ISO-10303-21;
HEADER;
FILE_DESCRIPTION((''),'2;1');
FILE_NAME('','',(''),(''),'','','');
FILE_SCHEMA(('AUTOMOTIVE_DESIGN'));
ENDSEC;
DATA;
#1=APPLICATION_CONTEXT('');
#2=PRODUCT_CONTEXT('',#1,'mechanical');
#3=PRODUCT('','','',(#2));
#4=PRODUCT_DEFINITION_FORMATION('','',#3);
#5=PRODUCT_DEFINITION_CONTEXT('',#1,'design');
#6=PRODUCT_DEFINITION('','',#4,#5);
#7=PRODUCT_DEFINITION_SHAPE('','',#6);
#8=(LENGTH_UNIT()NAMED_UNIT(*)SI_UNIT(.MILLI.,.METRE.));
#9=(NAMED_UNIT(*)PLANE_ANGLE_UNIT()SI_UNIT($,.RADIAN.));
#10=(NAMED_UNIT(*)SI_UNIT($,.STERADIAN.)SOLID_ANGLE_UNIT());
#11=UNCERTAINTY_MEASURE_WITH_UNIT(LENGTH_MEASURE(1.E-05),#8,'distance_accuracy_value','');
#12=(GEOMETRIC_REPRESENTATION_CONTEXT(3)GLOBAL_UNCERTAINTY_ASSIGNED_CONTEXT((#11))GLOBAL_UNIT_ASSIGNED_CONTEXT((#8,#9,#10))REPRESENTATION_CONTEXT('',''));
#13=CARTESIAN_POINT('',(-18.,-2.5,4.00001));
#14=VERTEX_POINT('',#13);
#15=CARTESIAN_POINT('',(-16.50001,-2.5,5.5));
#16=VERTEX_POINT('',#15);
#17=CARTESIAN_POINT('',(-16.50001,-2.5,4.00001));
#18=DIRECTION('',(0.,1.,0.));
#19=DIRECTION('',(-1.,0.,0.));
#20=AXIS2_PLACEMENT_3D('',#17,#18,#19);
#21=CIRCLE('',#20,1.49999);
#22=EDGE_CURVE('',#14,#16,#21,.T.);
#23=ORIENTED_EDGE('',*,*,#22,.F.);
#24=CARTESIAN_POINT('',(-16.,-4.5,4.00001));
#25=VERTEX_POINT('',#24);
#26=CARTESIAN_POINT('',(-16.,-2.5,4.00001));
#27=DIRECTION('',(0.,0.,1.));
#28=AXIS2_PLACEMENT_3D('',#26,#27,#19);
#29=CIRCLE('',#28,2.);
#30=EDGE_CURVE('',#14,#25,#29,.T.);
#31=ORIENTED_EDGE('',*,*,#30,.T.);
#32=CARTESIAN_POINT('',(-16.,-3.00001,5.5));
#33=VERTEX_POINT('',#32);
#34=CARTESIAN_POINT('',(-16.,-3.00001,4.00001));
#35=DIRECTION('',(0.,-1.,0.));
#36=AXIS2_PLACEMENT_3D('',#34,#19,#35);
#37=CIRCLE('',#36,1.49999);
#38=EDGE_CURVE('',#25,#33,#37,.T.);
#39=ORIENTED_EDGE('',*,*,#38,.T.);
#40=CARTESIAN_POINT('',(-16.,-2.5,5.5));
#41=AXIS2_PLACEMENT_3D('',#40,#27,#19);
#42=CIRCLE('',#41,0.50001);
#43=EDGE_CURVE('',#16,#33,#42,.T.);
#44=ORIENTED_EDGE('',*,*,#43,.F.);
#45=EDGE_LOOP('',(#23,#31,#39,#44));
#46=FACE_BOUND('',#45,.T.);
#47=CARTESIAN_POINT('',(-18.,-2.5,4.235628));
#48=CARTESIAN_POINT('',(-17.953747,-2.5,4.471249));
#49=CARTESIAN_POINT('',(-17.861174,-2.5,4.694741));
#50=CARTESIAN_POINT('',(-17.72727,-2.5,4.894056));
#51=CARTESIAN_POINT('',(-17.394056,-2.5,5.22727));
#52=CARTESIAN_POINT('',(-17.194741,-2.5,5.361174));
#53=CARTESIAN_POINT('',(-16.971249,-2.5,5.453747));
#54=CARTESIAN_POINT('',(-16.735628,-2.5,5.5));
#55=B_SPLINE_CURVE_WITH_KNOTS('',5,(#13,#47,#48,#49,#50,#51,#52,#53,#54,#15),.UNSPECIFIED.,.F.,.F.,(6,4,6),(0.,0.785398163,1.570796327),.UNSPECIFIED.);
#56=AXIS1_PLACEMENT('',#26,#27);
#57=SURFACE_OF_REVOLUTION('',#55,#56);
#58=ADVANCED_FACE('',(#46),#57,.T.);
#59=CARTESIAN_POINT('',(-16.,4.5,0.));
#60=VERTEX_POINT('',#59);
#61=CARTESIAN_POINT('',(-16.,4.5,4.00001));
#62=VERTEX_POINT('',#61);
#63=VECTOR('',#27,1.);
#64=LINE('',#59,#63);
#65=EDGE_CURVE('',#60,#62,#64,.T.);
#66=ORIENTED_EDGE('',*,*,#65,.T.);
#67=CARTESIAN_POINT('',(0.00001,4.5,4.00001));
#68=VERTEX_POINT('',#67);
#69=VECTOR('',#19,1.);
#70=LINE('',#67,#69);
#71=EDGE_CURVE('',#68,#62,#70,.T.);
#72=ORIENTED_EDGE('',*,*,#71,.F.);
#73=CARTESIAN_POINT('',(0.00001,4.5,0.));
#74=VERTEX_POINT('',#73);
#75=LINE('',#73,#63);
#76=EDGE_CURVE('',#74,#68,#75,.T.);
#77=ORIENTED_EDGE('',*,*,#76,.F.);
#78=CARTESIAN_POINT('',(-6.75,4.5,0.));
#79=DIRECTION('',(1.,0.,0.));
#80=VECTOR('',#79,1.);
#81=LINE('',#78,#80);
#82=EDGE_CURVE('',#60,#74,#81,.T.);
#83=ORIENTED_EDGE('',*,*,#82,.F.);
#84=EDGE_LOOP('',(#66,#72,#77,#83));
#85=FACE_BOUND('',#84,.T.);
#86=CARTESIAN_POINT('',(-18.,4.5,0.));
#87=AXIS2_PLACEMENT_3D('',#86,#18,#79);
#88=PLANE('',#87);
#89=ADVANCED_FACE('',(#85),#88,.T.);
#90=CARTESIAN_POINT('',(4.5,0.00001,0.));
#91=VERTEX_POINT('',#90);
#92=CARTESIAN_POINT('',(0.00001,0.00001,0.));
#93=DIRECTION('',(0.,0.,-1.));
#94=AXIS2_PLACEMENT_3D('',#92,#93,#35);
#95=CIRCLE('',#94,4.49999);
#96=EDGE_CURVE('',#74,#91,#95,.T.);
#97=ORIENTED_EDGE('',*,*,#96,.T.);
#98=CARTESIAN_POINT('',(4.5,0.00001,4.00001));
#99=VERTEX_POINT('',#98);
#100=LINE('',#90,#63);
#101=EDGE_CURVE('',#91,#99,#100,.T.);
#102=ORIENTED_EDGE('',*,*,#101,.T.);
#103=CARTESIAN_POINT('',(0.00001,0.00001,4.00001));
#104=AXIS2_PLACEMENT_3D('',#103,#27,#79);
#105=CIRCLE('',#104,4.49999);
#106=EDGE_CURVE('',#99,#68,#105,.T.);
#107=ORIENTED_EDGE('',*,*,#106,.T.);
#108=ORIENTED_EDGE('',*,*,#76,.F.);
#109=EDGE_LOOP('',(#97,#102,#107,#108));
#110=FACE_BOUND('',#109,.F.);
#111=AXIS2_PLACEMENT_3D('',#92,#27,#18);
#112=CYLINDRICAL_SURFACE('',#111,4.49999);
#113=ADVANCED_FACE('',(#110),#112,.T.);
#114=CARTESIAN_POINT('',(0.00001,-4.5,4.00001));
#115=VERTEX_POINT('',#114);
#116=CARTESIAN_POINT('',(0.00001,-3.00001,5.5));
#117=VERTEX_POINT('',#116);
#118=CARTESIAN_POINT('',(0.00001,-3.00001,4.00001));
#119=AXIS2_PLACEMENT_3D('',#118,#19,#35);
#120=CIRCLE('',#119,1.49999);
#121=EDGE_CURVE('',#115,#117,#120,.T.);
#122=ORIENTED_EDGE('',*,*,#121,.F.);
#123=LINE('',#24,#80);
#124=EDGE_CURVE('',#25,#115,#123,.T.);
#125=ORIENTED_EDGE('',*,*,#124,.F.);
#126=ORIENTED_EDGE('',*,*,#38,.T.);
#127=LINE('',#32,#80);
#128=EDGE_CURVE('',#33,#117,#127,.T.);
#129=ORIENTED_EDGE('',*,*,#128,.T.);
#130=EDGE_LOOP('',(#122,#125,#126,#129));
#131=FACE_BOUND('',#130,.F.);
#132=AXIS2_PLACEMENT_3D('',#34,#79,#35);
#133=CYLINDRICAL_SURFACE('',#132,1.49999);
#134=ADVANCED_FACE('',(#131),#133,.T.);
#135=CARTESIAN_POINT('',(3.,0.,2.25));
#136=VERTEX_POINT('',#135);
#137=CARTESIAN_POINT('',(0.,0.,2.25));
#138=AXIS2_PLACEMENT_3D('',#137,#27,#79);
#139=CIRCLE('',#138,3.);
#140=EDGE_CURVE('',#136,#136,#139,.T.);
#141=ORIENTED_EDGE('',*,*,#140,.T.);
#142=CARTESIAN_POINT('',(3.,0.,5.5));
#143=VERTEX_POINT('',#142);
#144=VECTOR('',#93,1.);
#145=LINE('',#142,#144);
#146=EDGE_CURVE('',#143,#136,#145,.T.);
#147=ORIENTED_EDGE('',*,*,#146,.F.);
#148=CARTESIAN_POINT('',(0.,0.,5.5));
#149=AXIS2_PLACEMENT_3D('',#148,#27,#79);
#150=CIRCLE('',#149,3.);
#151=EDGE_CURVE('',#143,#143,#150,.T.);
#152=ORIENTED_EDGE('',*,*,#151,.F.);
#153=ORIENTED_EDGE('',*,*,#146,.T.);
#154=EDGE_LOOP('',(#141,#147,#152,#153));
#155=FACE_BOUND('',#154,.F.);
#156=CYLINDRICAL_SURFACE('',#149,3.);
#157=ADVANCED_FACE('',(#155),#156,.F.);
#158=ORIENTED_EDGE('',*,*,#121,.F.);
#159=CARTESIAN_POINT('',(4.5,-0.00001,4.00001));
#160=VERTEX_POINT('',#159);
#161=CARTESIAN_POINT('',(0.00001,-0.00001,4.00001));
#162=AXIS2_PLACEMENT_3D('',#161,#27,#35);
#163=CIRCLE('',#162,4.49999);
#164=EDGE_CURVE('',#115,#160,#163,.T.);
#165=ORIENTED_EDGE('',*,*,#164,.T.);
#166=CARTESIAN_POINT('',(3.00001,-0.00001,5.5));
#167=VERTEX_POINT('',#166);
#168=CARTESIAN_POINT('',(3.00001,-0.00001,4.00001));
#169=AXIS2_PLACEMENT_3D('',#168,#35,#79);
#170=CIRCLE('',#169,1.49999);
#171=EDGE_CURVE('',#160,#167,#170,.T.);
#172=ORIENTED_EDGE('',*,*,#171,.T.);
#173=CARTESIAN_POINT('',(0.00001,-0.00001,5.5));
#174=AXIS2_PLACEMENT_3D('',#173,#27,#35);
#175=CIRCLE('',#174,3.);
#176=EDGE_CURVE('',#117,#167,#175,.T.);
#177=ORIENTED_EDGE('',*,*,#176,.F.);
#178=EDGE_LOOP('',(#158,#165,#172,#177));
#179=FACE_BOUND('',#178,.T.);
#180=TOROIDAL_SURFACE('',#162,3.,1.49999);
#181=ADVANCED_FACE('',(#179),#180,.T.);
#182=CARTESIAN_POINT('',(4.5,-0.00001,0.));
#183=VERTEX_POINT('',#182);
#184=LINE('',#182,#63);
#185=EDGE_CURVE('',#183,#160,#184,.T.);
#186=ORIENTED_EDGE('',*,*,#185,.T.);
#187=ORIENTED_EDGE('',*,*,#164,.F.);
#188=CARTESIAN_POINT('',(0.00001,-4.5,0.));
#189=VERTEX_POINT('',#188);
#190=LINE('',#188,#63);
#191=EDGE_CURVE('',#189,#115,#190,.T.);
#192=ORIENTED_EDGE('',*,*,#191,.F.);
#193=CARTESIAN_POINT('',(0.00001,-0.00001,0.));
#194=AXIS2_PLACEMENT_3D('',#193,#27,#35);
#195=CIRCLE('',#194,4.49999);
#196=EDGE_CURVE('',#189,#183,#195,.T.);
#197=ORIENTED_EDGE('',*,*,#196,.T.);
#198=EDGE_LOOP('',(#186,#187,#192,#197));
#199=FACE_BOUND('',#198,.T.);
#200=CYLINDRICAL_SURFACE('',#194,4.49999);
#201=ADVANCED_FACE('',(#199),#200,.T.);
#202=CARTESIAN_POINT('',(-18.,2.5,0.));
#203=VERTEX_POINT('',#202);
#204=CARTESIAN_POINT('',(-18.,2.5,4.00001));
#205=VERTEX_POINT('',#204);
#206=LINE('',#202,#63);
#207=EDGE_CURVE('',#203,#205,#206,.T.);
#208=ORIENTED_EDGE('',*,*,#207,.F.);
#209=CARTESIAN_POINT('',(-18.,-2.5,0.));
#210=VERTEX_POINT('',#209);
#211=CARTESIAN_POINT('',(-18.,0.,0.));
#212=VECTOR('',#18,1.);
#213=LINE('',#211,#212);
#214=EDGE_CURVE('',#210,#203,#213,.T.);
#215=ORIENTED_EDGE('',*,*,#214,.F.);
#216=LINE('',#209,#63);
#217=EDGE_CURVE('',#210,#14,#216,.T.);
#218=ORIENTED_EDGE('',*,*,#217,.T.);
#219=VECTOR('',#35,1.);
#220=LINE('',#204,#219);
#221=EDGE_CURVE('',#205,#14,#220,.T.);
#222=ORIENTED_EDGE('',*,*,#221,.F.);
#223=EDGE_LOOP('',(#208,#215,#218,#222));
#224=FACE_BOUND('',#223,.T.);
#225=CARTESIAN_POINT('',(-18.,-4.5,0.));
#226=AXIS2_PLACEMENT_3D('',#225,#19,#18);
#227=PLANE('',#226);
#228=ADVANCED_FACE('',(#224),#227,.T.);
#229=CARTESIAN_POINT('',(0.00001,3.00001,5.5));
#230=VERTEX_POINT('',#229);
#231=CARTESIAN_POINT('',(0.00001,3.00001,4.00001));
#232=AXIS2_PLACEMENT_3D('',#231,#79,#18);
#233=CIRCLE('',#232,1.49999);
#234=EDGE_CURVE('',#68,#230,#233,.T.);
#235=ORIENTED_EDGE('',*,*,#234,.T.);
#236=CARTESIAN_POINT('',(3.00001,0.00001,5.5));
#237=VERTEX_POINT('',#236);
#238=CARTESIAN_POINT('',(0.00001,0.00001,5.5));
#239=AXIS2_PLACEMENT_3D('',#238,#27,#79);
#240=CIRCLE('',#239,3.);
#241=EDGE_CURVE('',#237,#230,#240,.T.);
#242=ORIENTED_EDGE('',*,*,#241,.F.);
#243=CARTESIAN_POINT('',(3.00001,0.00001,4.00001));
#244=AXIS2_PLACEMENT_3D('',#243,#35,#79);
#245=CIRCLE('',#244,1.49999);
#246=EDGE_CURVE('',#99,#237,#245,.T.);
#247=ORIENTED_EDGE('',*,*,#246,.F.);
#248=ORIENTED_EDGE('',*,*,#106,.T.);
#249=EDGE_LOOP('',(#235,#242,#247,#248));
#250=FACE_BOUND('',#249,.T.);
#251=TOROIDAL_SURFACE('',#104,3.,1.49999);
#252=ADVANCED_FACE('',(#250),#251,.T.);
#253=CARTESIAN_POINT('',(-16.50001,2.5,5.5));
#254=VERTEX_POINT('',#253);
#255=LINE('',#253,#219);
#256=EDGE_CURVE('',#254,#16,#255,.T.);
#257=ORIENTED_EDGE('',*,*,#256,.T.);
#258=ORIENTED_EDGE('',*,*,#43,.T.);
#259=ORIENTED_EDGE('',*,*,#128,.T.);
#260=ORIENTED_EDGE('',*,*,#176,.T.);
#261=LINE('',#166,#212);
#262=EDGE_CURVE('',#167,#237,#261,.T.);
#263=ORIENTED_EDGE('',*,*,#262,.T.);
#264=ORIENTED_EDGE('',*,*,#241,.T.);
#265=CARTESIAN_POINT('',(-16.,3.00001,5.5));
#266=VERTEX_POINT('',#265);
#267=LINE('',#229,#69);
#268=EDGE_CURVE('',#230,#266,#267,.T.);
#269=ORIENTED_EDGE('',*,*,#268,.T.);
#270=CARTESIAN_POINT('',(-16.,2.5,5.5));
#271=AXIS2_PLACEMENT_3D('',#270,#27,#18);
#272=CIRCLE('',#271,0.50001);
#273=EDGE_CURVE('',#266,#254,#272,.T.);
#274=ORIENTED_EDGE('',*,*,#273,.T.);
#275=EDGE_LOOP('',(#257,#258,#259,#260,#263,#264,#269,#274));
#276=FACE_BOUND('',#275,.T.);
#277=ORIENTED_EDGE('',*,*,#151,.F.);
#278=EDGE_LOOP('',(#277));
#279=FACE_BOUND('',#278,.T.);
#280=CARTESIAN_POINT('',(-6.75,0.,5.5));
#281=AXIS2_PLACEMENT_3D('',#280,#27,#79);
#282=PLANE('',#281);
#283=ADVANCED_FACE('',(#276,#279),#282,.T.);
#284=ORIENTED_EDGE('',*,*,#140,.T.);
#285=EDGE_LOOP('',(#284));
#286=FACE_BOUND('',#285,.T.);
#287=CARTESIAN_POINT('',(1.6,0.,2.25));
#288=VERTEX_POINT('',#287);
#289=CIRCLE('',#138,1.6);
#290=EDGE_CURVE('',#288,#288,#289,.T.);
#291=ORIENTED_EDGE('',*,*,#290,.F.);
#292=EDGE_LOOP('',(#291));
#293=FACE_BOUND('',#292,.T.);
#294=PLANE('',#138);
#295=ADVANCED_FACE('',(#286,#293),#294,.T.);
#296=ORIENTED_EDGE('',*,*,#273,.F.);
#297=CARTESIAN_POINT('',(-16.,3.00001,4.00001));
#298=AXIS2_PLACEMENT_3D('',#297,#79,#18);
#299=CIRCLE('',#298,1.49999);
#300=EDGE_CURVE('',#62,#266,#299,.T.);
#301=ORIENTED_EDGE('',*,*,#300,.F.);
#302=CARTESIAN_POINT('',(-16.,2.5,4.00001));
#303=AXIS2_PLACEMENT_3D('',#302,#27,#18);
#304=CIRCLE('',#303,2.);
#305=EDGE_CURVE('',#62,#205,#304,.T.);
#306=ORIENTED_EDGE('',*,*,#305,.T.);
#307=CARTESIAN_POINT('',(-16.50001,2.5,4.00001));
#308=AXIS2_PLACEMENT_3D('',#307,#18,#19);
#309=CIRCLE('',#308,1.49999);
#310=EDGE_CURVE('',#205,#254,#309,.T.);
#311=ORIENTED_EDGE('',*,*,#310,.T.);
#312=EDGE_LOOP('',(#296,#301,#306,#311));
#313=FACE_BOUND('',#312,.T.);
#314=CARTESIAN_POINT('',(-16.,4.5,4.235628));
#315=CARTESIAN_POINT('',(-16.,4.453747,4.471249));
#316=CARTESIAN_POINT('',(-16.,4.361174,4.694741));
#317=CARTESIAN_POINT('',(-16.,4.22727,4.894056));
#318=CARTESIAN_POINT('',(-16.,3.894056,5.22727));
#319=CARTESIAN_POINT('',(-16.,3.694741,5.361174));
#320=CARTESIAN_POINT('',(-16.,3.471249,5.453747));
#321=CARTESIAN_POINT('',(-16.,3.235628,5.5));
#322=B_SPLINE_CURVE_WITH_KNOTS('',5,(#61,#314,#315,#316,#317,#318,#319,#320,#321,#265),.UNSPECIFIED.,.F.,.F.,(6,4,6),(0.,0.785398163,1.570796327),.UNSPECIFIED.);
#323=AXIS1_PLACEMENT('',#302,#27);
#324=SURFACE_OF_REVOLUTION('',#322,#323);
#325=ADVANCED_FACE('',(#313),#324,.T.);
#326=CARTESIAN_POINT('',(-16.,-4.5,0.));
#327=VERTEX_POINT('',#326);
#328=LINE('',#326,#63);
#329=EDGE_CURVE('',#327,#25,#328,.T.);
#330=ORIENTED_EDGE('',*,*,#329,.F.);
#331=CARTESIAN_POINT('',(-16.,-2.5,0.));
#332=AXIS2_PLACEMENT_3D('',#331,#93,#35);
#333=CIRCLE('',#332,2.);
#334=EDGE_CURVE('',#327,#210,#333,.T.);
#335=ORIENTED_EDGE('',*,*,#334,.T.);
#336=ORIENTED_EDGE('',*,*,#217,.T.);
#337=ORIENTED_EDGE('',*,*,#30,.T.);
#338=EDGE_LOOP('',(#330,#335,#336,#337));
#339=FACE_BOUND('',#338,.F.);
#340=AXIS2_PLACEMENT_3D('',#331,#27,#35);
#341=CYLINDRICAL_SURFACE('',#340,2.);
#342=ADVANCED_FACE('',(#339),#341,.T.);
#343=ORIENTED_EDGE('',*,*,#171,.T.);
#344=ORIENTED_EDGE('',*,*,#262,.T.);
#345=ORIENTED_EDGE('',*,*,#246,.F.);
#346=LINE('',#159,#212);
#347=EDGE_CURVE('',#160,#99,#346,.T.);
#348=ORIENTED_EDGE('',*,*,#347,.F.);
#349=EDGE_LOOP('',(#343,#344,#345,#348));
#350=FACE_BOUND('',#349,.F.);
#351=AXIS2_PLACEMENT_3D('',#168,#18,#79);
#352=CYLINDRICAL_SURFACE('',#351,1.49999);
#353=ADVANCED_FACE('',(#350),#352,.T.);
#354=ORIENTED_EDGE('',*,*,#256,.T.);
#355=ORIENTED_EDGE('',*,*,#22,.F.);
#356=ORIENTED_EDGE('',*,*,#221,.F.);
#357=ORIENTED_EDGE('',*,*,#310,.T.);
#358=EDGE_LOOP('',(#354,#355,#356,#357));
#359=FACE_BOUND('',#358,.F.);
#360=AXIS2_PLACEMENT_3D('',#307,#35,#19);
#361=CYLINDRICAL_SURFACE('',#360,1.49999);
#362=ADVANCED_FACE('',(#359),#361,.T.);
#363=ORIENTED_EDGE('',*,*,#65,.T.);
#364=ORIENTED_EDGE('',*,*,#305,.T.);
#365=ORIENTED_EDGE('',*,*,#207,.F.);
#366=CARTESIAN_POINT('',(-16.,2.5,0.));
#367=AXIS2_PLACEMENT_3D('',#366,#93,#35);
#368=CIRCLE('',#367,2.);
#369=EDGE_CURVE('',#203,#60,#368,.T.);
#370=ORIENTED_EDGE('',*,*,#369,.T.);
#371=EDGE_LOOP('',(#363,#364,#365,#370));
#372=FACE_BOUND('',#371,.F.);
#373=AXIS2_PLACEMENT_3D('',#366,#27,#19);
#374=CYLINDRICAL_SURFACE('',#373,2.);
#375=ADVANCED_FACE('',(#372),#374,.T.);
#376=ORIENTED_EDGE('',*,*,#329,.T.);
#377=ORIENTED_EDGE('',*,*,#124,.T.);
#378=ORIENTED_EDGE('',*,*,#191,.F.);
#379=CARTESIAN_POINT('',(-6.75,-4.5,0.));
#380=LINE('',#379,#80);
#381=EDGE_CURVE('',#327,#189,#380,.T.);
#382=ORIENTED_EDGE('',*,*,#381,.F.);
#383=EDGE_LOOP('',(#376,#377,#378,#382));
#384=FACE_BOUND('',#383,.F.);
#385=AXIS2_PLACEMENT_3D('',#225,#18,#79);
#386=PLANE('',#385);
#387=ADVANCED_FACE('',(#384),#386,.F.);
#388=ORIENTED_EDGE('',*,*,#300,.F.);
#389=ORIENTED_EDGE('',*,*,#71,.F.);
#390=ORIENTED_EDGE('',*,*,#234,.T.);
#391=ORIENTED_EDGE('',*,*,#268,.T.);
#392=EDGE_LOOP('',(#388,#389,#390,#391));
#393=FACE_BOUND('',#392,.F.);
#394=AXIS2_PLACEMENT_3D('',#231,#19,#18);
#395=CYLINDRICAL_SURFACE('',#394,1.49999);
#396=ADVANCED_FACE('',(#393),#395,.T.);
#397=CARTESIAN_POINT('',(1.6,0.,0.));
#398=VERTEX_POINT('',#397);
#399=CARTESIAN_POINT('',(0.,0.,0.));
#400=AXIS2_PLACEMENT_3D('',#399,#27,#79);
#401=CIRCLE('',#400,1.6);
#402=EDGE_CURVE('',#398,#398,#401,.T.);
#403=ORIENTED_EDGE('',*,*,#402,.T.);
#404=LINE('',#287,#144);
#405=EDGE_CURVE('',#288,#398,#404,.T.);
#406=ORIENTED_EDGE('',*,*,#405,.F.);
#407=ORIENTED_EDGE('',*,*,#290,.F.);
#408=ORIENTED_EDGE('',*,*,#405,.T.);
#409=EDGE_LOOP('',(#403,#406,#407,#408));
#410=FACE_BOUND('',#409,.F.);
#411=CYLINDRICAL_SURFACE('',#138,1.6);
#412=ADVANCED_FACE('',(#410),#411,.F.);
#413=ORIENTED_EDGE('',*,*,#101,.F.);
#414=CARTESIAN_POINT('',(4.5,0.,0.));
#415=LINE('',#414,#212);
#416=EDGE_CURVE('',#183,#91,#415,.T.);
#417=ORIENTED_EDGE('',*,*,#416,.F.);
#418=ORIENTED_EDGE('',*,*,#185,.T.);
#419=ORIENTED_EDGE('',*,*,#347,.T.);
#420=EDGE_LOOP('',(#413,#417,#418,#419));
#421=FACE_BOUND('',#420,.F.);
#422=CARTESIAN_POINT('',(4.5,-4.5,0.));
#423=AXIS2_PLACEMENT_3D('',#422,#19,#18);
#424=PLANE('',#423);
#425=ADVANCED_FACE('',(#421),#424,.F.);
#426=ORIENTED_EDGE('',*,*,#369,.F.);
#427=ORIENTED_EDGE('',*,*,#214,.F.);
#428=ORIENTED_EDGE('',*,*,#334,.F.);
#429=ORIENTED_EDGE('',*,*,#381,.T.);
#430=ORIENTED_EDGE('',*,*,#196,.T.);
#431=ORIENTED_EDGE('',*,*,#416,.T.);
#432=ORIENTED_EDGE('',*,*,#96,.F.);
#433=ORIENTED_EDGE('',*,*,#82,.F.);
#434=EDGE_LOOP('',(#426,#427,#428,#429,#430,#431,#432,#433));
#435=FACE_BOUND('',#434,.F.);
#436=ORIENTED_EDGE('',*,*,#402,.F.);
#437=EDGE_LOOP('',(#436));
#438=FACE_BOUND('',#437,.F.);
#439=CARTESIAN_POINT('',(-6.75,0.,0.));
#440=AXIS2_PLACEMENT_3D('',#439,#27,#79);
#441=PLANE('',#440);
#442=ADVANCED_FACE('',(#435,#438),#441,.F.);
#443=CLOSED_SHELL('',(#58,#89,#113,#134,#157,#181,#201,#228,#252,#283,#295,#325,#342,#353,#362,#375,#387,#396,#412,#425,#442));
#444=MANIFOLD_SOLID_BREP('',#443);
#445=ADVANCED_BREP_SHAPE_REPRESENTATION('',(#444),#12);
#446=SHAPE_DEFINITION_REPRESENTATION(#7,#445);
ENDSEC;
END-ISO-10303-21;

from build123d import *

# Parameters (mm, degrees)
F0_W     = 22.5
F0_H     = 9
F1_DEPTH = 5.5
F2_R     = 3
F3_DEPTH = 3.25
F4_R     = 1.6
F5_DEPTH = 2.5
F6_R     = 4.49999
F7_R     = 2
F8_R     = 1.49999


# Not quite as in the source:
# - a fillet or chamfer is up to 0.001 mm smaller than in the source, because OpenCascade refuses the exact size


with BuildPart() as f1:
    # F0 (on Top) → F1 (new body)
    with BuildSketch(Plane.XY):
        with Locations((-6.75, 0)):
            Rectangle(F0_W, F0_H)
    extrude(amount=F1_DEPTH)

    # F2 (on face) → F3 (cut)
    with BuildSketch(Plane.XY.offset(5.5)):
        Circle(F2_R)
    extrude(amount=-F3_DEPTH, mode=Mode.SUBTRACT)

    # F4 (on face) → F5 (cut)
    with BuildSketch(Plane.XY.offset(2.25)):
        Circle(F4_R)
    extrude(amount=-F5_DEPTH, mode=Mode.SUBTRACT)

    # F6 (radius 4.5 in the source; OpenCascade refuses exactly that, so slightly less here)
    f6_edges = [f1.edges().sort_by_distance(p)[0] for p in [
        (4.5, -4.5, 2.75),
        (4.5, 4.5, 2.75),
    ]]
    fillet(f6_edges, radius=F6_R)

    # F7
    f7_edges = [f1.edges().sort_by_distance(p)[0] for p in [
        (-18, 4.5, 2.75),
        (-18, -4.5, 2.75),
    ]]
    fillet(f7_edges, radius=F7_R)

    # F8 (radius 1.5 in the source; OpenCascade refuses exactly that, so slightly less here)
    f8_edges = [f1.edges().sort_by_distance(p)[0] for p in [
        (-7.999995, -4.5, 5.5),
    ]]
    fillet(f8_edges, radius=F8_R)


solid = f1.part
